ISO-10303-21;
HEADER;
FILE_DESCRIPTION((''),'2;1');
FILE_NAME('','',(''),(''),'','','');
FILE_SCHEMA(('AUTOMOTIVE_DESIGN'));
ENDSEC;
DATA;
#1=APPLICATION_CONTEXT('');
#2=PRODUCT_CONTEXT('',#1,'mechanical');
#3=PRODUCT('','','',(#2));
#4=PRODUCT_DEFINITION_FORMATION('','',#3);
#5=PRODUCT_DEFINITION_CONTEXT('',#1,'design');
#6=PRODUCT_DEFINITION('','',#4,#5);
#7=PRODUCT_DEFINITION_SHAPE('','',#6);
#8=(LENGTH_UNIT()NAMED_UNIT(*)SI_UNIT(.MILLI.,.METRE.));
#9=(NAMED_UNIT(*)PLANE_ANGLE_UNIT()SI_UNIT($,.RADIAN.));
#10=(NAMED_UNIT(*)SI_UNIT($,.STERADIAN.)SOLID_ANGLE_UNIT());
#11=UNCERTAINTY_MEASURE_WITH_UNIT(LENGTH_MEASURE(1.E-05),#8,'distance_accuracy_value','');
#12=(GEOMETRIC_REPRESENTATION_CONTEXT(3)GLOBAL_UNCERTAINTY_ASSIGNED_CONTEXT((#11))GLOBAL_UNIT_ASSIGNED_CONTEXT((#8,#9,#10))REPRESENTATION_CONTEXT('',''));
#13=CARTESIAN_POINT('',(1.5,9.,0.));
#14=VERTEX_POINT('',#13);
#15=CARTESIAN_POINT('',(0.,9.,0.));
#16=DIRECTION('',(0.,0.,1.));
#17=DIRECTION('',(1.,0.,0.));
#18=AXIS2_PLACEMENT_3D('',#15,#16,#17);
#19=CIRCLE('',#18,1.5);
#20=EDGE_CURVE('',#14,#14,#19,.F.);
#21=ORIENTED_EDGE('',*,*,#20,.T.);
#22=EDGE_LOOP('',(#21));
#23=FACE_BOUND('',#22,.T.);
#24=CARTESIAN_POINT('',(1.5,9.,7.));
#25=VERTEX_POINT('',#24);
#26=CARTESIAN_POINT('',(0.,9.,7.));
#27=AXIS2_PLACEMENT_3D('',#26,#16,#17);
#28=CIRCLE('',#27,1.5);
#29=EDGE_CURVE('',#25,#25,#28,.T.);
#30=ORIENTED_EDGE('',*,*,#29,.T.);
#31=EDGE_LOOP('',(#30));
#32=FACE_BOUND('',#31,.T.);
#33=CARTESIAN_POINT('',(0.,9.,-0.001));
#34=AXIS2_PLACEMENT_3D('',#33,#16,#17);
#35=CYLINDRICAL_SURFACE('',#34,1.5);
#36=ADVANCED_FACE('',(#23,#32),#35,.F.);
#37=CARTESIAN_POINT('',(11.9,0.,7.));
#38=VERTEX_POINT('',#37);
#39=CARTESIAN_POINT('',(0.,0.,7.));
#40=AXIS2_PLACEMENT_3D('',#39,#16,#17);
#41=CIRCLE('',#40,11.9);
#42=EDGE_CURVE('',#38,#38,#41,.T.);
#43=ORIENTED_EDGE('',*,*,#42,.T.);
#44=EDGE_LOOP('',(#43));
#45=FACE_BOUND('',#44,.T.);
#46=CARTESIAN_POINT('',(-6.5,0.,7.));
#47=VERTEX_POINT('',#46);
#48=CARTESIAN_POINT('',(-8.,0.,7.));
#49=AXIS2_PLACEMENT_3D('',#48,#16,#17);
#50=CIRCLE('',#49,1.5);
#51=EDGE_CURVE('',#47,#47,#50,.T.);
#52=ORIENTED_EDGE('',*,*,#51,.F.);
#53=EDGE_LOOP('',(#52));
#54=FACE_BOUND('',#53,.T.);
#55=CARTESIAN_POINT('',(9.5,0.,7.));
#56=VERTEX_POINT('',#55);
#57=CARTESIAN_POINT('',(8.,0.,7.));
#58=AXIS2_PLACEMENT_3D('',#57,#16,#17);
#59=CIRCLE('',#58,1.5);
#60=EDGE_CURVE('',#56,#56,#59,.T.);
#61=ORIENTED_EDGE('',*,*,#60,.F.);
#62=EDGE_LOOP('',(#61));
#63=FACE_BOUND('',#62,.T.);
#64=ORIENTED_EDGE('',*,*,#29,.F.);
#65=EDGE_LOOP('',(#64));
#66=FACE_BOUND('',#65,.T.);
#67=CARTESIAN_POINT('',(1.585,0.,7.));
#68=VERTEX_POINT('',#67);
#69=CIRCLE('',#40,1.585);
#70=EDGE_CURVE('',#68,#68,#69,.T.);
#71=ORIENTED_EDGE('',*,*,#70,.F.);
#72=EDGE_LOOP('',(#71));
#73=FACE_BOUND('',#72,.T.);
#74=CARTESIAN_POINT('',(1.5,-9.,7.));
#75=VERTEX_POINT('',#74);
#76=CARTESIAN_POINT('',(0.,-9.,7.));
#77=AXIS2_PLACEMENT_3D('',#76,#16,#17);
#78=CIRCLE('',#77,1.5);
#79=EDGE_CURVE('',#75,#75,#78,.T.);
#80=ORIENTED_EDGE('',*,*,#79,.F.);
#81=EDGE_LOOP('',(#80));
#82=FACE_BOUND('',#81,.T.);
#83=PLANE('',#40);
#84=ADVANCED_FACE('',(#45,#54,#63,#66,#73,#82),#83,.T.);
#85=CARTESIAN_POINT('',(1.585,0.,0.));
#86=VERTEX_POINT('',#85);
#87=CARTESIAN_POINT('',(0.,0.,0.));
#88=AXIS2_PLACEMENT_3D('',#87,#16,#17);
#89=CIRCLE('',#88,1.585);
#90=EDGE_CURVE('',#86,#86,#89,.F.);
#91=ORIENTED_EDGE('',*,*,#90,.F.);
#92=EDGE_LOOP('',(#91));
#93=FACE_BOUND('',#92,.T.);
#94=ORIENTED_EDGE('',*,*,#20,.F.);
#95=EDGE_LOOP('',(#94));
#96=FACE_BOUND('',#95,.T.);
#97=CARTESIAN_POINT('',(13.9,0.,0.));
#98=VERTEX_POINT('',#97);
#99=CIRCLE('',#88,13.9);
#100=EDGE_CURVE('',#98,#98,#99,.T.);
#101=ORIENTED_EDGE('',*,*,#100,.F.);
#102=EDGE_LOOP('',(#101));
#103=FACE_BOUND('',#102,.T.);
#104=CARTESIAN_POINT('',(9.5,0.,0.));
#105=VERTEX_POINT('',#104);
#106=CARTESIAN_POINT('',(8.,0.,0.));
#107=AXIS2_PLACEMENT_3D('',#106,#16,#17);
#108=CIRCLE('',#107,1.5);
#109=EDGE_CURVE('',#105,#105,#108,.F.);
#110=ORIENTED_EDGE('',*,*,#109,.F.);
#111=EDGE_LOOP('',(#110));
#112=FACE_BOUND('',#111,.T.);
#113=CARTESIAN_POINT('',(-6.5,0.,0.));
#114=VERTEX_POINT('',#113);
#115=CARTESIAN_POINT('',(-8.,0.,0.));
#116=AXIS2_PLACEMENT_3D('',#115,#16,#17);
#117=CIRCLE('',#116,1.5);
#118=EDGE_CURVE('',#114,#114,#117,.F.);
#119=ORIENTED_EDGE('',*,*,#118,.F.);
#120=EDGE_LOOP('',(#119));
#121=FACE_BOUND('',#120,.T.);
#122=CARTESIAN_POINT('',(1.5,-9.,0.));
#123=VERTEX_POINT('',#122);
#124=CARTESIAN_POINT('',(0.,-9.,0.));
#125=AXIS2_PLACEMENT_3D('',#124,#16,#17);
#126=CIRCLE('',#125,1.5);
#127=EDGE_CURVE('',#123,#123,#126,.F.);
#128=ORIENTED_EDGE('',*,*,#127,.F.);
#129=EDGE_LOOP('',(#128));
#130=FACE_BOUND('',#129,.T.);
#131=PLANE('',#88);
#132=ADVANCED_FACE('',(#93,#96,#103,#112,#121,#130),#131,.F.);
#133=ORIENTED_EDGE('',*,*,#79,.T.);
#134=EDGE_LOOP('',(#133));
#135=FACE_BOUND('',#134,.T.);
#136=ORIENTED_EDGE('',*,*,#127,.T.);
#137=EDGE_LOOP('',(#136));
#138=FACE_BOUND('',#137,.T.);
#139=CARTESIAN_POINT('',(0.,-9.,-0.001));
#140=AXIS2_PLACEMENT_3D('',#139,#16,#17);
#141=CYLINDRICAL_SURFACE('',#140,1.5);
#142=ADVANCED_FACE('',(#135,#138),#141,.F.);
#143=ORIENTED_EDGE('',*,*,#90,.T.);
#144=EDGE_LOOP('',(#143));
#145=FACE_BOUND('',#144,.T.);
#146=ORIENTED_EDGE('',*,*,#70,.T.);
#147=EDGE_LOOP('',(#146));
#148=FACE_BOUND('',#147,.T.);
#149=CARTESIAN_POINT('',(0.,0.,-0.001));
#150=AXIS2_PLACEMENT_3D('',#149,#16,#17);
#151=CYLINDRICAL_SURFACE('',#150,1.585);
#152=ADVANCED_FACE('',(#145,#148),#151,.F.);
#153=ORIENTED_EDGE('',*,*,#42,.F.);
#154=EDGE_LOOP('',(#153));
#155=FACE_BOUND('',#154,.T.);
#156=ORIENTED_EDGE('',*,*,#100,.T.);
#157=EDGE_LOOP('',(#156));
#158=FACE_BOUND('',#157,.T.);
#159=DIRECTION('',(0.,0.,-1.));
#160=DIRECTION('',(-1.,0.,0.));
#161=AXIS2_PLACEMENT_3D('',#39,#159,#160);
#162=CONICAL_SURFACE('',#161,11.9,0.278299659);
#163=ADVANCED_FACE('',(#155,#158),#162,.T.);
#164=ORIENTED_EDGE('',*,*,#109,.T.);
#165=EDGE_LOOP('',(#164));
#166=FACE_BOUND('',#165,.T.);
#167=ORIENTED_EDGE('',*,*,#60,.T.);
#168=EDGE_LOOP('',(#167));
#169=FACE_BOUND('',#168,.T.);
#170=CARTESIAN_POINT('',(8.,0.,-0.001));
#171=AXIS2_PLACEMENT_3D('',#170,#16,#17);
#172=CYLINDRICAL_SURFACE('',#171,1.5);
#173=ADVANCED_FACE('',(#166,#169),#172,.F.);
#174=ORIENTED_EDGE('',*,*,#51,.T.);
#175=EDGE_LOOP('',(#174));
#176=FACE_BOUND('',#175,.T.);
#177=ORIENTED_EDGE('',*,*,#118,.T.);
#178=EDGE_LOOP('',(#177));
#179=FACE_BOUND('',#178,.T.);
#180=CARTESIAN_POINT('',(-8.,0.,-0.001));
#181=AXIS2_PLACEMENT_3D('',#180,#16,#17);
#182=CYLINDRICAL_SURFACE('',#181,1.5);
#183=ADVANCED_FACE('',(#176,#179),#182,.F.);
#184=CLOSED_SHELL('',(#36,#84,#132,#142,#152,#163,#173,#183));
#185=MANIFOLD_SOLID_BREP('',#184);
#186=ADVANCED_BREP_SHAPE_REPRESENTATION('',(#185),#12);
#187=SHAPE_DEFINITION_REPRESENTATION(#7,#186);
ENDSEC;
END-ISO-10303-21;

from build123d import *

# Parameters (mm, degrees)
SKETCH1_R           = 13.9
BOSS_EXTRUDE1_DEPTH = 7
CUT_EXTRUDE1_REACH  = 22.867
SKETCH2_R           = 1.585
CUT_EXTRUDE2_REACH  = 22.867
SKETCH3_R           = 1.5
CHAMFER1_SIZE       = 7
CHAMFER1_SIZE_2     = 2


with BuildPart() as part:
    # Sketch1 → Boss-Extrude1 (new body)
    with BuildSketch(Plane.XY):
        Circle(SKETCH1_R)
    extrude(amount=BOSS_EXTRUDE1_DEPTH)

    # Sketch2 → Cut-Extrude1 (cut, up to next)
    with BuildSketch(Plane.XY.offset(7), mode=Mode.PRIVATE) as cut_extrude1_sk1:
        Circle(SKETCH2_R)
    cut_extrude1_tool1 = extrude(cut_extrude1_sk1.sketch, amount=-CUT_EXTRUDE1_REACH, mode=Mode.PRIVATE) & part.part
    add(cut_extrude1_tool1.solids().sort_by_distance((0, 0, 7))[0], mode=Mode.SUBTRACT)

    # Sketch3 → Cut-Extrude2 (cut, up to next)
    with BuildSketch(Plane.XY.offset(7), mode=Mode.PRIVATE) as cut_extrude2_sk1:
        with Locations((-8, 0)):
            Circle(SKETCH3_R)
    cut_extrude2_tool1 = extrude(cut_extrude2_sk1.sketch, amount=-CUT_EXTRUDE2_REACH, mode=Mode.PRIVATE) & part.part
    # Sketch3 → Cut-Extrude2 (cut, up to next)
    with BuildSketch(Plane.XY.offset(7), mode=Mode.PRIVATE) as cut_extrude2_sk2:
        with Locations((8, 0)):
            Circle(SKETCH3_R)
    cut_extrude2_tool2 = extrude(cut_extrude2_sk2.sketch, amount=-CUT_EXTRUDE2_REACH, mode=Mode.PRIVATE) & part.part
    # Sketch3 → Cut-Extrude2 (cut, up to next)
    with BuildSketch(Plane.XY.offset(7), mode=Mode.PRIVATE) as cut_extrude2_sk3:
        with Locations((0, -9)):
            Circle(SKETCH3_R)
    cut_extrude2_tool3 = extrude(cut_extrude2_sk3.sketch, amount=-CUT_EXTRUDE2_REACH, mode=Mode.PRIVATE) & part.part
    # Sketch3 → Cut-Extrude2 (cut, up to next)
    with BuildSketch(Plane.XY.offset(7), mode=Mode.PRIVATE) as cut_extrude2_sk4:
        with Locations((0, 9)):
            Circle(SKETCH3_R)
    cut_extrude2_tool4 = extrude(cut_extrude2_sk4.sketch, amount=-CUT_EXTRUDE2_REACH, mode=Mode.PRIVATE) & part.part
    add(cut_extrude2_tool1.solids().sort_by_distance((-8, 0, 7))[0], mode=Mode.SUBTRACT)
    add(cut_extrude2_tool2.solids().sort_by_distance((8, 0, 7))[0], mode=Mode.SUBTRACT)
    add(cut_extrude2_tool3.solids().sort_by_distance((0, -9, 7))[0], mode=Mode.SUBTRACT)
    add(cut_extrude2_tool4.solids().sort_by_distance((0, 9, 7))[0], mode=Mode.SUBTRACT)

    # Chamfer1
    # the kernel refuses this chamfer: 7, 2 mm, written as the material it takes off along each edge
    with BuildSketch(Plane(origin=(0, 0, 7), x_dir=(1, 0, 0), z_dir=(0, -1, 0))) as chamfer1_piece_1:
        Polygon((13.9, -CHAMFER1_SIZE), (13.9 - CHAMFER1_SIZE_2, 0), (13.9, 0), align=None)
    revolve(axis=Axis((0, 0, 7), (0, 0, 1)), mode=Mode.SUBTRACT)


solid = part.part
